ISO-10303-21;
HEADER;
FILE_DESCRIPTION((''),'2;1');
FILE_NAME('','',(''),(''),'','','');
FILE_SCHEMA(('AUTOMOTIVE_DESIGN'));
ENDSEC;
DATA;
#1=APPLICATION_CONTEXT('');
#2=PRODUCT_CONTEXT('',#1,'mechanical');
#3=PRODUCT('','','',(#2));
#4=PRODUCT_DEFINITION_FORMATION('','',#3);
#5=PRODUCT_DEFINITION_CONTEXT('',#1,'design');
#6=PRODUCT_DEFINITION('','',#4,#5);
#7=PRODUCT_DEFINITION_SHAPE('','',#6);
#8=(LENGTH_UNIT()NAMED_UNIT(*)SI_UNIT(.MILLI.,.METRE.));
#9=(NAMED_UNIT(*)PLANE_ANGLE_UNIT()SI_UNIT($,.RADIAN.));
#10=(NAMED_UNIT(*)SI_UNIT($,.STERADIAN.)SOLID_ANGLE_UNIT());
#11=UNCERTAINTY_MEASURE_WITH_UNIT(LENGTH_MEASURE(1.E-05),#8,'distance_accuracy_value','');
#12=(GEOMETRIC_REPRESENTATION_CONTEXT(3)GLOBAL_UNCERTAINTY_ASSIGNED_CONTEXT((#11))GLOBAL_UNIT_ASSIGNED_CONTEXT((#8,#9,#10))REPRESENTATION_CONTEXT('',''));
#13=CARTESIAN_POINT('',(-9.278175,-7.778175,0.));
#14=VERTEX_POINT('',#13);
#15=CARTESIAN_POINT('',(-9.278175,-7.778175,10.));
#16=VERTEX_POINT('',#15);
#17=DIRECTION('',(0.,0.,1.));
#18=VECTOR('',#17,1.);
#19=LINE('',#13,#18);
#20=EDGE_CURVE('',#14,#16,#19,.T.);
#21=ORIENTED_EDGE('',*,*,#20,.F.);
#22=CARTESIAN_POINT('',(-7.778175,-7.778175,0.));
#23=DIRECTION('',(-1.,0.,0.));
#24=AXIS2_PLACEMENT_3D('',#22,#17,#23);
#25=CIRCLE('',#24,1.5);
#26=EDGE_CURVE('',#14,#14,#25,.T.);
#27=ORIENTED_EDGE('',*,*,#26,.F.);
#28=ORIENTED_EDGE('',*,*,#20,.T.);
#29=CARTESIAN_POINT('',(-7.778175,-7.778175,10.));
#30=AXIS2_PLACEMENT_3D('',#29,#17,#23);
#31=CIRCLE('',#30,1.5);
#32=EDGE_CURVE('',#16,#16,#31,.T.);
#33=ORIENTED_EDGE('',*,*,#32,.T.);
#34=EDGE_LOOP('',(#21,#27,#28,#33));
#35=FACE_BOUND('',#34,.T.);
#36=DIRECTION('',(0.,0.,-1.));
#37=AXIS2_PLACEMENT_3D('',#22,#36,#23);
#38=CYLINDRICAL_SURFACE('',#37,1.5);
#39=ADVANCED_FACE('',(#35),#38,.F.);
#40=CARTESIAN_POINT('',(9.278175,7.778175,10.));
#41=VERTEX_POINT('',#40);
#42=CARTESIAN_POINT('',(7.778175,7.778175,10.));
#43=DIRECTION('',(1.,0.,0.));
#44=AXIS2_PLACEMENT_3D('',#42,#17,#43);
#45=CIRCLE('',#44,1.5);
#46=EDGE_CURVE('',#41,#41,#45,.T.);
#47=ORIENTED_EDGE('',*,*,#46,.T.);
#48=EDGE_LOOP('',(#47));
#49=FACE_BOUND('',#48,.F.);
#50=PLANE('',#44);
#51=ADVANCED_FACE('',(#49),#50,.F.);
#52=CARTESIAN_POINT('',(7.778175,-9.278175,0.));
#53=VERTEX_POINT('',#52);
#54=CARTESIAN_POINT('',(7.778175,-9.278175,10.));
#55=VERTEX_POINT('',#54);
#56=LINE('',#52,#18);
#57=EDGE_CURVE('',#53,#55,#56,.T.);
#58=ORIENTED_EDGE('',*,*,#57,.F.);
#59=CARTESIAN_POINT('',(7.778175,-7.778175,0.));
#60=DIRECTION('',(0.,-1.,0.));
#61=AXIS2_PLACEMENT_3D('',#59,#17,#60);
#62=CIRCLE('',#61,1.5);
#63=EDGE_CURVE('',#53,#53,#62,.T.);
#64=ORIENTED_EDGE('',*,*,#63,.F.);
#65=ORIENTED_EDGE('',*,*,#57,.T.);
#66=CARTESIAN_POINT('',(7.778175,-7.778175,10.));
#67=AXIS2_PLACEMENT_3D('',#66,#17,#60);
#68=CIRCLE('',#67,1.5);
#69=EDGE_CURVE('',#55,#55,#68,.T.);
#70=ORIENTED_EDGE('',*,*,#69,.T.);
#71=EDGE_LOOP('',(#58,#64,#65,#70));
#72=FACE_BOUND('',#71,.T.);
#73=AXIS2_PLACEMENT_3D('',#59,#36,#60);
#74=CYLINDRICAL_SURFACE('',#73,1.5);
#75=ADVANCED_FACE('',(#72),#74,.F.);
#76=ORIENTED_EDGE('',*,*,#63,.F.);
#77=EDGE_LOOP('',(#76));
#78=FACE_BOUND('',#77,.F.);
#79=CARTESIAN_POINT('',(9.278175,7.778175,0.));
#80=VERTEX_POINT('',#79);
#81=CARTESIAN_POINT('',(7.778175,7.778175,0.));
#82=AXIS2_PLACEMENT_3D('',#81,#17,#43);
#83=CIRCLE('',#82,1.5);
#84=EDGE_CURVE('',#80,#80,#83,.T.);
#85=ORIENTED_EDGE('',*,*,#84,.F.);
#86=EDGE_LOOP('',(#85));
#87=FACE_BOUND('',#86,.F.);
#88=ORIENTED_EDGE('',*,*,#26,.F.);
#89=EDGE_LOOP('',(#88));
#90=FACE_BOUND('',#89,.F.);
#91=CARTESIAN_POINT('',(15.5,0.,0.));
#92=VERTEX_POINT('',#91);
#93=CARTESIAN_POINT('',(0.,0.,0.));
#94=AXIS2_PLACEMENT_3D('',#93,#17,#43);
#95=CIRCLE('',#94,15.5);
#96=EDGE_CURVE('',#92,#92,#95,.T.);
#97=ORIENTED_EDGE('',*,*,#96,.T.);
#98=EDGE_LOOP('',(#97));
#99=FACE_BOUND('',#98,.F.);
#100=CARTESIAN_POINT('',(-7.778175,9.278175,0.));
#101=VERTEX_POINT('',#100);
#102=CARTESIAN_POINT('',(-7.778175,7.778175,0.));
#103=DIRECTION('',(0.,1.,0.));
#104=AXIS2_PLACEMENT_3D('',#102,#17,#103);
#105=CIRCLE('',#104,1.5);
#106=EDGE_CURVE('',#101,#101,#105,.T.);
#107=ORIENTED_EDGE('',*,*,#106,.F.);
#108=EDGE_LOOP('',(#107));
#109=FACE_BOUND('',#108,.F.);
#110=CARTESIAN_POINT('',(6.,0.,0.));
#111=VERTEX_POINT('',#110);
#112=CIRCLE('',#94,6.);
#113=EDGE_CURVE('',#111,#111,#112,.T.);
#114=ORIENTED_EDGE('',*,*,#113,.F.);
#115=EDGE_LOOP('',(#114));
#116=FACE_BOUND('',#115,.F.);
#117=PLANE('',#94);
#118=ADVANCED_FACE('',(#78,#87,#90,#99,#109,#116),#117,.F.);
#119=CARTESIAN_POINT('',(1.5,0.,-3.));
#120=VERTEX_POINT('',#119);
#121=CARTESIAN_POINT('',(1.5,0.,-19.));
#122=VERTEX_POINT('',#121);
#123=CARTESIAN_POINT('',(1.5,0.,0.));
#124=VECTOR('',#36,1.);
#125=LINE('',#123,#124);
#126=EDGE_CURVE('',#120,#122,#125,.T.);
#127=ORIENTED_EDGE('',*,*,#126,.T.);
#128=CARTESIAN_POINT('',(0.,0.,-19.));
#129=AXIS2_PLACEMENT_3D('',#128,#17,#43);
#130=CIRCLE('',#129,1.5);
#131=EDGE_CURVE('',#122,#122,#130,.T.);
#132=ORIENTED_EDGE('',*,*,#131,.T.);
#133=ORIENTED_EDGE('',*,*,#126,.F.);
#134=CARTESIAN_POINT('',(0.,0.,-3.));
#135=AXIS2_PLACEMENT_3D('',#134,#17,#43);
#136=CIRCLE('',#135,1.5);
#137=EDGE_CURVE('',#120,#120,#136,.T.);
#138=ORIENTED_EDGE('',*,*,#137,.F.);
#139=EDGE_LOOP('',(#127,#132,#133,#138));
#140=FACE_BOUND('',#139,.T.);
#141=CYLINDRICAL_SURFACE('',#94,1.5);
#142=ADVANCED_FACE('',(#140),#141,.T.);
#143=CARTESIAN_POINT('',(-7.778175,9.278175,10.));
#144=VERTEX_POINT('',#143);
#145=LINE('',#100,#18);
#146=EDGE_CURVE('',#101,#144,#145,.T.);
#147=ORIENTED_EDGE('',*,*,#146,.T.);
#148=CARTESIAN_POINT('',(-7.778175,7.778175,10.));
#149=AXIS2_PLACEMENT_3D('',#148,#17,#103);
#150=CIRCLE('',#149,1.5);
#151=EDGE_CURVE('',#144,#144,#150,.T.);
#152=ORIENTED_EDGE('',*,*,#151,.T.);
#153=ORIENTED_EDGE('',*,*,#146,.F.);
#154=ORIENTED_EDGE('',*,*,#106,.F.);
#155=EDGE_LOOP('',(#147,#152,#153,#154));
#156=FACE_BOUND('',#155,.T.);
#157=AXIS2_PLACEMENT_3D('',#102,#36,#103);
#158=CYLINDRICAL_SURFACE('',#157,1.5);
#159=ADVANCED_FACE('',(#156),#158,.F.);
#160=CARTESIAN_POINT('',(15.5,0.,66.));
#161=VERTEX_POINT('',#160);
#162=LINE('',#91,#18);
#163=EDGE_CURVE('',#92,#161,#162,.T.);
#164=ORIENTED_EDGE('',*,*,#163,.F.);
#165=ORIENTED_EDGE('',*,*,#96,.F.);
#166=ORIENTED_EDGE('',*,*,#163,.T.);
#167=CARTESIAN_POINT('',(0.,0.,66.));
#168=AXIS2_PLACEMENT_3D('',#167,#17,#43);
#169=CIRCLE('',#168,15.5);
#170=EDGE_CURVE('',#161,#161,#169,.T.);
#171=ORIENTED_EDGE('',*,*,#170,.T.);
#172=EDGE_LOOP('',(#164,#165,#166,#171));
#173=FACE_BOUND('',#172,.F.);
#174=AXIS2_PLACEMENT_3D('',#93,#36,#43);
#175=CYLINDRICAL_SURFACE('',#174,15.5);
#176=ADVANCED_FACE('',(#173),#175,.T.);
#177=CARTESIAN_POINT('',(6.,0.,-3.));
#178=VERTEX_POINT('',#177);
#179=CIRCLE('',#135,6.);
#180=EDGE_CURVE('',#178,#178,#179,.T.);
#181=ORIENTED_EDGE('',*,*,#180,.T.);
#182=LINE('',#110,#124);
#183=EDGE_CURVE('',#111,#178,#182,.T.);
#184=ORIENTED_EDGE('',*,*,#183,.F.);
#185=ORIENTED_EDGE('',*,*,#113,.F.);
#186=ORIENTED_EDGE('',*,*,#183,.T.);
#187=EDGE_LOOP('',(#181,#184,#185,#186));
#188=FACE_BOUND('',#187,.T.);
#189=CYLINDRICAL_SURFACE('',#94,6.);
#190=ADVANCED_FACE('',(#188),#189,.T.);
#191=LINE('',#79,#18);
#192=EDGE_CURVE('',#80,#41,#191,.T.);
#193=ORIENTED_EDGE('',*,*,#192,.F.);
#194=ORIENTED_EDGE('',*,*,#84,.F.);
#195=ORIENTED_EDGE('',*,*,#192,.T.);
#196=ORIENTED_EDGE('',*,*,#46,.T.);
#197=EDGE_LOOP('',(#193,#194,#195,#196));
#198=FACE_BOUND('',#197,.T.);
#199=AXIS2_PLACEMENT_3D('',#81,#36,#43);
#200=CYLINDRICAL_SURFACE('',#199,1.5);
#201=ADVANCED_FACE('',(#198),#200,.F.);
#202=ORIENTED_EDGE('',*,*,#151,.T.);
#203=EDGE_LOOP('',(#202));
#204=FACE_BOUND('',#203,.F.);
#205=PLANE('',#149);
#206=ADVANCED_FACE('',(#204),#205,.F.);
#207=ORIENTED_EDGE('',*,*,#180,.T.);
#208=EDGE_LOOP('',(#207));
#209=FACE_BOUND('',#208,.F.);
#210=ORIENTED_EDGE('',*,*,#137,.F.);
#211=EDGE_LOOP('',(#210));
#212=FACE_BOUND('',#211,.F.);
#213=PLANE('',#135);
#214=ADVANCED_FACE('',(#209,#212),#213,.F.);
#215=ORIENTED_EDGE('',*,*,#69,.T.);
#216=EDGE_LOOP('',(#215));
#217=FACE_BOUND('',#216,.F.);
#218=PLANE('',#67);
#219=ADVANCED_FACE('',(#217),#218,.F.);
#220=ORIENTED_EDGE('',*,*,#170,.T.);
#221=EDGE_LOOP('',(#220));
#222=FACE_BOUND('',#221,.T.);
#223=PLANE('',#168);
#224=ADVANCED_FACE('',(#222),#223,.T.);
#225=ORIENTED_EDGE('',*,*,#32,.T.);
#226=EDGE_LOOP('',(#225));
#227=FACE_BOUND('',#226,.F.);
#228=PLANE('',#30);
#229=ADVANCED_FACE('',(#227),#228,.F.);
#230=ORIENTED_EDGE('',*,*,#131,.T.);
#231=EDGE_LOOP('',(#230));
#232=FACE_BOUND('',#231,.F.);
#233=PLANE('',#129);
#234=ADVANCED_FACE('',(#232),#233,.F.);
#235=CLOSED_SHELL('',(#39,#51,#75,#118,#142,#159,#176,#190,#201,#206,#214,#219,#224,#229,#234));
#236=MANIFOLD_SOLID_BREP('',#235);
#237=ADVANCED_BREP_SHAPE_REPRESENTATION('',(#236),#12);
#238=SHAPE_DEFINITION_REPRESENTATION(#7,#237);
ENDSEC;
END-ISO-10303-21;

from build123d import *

# Parameters (mm, degrees)
F0_R            = 1.5
F1_DEPTH        = 19
F0_R_2          = 6
F2_DEPTH        = 3
F0_R_3          = 15.5
F3_DEPTH        = 66
F4_DEPTH        = 10
F4_COPIES_COUNT = 4


# Not quite as in the source:
# - a pattern or mirror of a feature is missing from the dataset's text; its kind, count and spacing are read off the source's solid


with BuildPart() as f1:
    # F0 (on Top) → F1 (new body)
    with BuildSketch(Plane.XY):
        Circle(F0_R)
    extrude(amount=-F1_DEPTH)

    # F0 (on Top) → F2 (join)
    with BuildSketch(Plane.XY):
        Circle(F0_R_2)
        Circle(F0_R, mode=Mode.SUBTRACT)
    extrude(amount=-F2_DEPTH)

    # F0 (on Top) → F3 (join)
    with BuildSketch(Plane.XY):
        Circle(F0_R_3)
        Circle(F0_R_2, mode=Mode.SUBTRACT)
        with Locations((7.7781745931, 7.7781745931)):
            Circle(F0_R, mode=Mode.SUBTRACT)
        Circle(F0_R_2)
        Circle(F0_R, mode=Mode.SUBTRACT)
        Circle(F0_R)
        with Locations((7.7781745931, 7.7781745931)):
            Circle(F0_R)
    extrude(amount=F3_DEPTH)

    # F0 (on Top) → F4 (cut)
    with BuildSketch(Plane.XY):
        with Locations((7.7781745931, 7.7781745931)):
            Circle(F0_R)
    f4 = extrude(amount=F4_DEPTH, mode=Mode.SUBTRACT)

    # F4_copies: F4 ×4 about axis
    f4_copies_axis = Axis((0, 0, 0), (0, 0, 1))
    for i in range(1, F4_COPIES_COUNT):
        add(f4.rotate(f4_copies_axis, i * 360 / F4_COPIES_COUNT), mode=Mode.SUBTRACT)


solid = f1.part
